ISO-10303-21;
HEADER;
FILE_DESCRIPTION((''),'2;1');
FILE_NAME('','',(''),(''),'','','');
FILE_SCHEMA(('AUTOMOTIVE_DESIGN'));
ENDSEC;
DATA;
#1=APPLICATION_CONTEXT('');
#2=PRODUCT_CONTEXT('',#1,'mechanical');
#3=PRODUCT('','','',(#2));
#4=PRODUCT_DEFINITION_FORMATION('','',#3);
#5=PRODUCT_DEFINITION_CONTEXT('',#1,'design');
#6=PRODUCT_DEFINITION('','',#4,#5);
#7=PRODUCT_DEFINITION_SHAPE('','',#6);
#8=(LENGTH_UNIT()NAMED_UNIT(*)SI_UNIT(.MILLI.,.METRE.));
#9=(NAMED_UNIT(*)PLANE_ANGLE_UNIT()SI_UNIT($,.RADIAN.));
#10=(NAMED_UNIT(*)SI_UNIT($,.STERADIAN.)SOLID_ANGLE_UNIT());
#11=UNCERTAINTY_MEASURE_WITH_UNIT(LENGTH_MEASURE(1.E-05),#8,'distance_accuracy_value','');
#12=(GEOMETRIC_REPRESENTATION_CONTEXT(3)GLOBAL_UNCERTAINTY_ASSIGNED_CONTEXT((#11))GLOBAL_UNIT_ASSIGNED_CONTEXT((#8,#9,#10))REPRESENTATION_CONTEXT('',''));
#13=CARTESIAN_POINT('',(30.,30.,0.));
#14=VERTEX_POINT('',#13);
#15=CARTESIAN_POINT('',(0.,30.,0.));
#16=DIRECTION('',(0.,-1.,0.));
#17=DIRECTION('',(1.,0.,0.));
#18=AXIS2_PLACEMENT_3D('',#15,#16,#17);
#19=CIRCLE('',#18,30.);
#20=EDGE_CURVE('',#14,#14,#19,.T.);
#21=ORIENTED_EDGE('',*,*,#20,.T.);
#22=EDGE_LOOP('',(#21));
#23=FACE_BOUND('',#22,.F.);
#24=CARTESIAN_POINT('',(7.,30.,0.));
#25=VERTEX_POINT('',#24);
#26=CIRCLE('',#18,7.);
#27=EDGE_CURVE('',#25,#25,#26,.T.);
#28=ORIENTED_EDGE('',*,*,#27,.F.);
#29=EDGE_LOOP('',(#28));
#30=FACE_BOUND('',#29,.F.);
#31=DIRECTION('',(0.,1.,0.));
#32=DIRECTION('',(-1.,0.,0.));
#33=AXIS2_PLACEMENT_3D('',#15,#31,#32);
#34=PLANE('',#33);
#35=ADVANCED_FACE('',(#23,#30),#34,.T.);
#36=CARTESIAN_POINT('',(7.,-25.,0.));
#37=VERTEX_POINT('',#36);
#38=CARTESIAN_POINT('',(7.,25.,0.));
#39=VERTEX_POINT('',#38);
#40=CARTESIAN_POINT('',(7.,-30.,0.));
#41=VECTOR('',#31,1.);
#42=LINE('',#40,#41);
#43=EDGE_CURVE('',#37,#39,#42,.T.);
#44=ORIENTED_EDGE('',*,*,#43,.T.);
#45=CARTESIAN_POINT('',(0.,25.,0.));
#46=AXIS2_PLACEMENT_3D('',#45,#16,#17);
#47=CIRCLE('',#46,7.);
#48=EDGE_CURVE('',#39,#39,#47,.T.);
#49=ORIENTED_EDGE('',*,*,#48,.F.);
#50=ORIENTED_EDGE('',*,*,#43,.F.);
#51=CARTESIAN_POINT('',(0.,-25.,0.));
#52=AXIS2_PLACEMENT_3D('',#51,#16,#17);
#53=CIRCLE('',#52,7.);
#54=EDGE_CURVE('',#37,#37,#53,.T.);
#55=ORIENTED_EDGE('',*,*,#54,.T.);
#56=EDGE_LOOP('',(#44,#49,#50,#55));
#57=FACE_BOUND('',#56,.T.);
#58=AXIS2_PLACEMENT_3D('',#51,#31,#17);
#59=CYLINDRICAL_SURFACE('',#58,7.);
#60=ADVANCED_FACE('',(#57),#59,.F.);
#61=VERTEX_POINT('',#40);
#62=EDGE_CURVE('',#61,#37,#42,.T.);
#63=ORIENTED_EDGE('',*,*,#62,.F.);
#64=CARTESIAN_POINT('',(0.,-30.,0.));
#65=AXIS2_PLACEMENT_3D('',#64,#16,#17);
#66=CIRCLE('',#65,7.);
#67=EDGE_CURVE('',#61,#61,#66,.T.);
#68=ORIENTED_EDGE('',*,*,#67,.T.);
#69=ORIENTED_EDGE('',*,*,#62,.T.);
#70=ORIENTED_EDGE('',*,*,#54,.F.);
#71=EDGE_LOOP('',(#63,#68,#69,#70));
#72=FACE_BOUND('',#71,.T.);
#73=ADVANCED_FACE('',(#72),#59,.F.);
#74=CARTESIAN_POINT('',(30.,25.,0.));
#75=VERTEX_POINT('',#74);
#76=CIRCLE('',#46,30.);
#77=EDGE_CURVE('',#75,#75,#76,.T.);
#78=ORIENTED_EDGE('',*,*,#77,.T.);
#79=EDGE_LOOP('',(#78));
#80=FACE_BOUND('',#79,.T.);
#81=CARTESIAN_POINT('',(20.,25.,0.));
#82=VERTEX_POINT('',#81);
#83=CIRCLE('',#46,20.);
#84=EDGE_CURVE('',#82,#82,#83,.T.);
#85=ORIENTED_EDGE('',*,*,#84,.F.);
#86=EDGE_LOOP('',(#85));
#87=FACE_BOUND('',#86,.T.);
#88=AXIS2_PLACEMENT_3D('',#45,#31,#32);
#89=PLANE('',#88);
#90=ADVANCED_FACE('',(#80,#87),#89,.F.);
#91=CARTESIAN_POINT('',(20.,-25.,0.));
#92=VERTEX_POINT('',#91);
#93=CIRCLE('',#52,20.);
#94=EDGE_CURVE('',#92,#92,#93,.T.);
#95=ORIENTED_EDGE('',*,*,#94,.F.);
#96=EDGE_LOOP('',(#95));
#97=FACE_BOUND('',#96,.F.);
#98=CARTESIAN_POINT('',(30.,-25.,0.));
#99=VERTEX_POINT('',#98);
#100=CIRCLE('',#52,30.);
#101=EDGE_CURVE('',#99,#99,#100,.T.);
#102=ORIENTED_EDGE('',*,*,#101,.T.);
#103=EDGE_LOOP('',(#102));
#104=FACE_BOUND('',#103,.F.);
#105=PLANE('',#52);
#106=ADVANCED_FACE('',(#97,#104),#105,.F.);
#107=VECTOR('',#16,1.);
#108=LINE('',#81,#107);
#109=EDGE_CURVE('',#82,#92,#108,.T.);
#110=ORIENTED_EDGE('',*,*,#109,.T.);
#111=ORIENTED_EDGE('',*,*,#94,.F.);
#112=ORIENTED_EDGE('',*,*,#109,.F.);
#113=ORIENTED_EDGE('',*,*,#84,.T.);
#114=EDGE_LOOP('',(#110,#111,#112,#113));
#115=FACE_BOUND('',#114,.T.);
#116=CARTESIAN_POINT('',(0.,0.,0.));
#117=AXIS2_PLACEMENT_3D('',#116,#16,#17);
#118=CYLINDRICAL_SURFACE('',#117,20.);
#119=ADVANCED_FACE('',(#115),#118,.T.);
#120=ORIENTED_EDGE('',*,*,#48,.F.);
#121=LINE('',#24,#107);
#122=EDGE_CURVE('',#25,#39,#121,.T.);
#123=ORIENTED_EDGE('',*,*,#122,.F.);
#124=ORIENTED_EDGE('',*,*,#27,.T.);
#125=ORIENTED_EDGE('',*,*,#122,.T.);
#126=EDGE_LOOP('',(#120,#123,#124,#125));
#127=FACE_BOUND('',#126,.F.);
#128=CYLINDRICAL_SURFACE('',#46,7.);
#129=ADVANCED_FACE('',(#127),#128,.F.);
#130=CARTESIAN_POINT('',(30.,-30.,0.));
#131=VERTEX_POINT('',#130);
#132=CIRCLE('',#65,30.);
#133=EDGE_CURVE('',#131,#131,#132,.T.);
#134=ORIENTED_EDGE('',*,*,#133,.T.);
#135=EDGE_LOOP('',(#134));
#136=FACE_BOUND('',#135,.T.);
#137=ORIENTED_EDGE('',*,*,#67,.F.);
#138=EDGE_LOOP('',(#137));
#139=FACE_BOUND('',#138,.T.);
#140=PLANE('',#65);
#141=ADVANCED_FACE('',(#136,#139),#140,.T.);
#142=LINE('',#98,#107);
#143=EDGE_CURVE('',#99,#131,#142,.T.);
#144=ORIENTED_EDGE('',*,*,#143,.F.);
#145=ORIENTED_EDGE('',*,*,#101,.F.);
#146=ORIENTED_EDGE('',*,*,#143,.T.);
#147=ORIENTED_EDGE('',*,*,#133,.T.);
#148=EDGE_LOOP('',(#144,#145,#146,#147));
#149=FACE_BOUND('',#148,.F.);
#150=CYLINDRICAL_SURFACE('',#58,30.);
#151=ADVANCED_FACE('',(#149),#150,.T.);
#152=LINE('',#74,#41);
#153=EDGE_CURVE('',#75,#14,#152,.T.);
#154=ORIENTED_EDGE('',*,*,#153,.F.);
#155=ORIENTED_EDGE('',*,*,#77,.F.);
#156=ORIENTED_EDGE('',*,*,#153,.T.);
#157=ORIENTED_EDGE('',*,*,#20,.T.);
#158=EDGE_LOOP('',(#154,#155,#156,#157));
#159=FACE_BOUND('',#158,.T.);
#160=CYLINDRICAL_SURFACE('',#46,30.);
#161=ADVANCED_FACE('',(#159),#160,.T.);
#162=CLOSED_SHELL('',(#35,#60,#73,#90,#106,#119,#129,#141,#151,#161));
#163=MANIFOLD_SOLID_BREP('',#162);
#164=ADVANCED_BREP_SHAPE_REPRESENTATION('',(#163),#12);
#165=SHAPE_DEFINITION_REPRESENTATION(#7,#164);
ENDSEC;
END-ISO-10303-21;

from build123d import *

# Parameters (mm, degrees)
F0_R     = 20
F0_R_2   = 7
F1_DEPTH = 25
F2_R     = 30
F2_R_2   = 7
F3_DEPTH = 5


with BuildPart() as f1:
    # F0 (on Front) → F1 (new body, symmetric)
    with BuildSketch(Plane.XZ):
        Circle(F0_R)
        Circle(F0_R_2, mode=Mode.SUBTRACT)
    extrude(amount=F1_DEPTH, both=True)

    # F2 (on face) → F3 (join)
    with BuildSketch(Plane.XZ.offset(25)):
        Circle(F2_R)
        Circle(F2_R_2, mode=Mode.SUBTRACT)
    extrude(amount=F3_DEPTH)

    # F4: F1 across plane


with BuildPart() as f1_1:
    add(f1.part)
    add(f1.part.mirror(Plane.XZ))


solid = f1_1.part
